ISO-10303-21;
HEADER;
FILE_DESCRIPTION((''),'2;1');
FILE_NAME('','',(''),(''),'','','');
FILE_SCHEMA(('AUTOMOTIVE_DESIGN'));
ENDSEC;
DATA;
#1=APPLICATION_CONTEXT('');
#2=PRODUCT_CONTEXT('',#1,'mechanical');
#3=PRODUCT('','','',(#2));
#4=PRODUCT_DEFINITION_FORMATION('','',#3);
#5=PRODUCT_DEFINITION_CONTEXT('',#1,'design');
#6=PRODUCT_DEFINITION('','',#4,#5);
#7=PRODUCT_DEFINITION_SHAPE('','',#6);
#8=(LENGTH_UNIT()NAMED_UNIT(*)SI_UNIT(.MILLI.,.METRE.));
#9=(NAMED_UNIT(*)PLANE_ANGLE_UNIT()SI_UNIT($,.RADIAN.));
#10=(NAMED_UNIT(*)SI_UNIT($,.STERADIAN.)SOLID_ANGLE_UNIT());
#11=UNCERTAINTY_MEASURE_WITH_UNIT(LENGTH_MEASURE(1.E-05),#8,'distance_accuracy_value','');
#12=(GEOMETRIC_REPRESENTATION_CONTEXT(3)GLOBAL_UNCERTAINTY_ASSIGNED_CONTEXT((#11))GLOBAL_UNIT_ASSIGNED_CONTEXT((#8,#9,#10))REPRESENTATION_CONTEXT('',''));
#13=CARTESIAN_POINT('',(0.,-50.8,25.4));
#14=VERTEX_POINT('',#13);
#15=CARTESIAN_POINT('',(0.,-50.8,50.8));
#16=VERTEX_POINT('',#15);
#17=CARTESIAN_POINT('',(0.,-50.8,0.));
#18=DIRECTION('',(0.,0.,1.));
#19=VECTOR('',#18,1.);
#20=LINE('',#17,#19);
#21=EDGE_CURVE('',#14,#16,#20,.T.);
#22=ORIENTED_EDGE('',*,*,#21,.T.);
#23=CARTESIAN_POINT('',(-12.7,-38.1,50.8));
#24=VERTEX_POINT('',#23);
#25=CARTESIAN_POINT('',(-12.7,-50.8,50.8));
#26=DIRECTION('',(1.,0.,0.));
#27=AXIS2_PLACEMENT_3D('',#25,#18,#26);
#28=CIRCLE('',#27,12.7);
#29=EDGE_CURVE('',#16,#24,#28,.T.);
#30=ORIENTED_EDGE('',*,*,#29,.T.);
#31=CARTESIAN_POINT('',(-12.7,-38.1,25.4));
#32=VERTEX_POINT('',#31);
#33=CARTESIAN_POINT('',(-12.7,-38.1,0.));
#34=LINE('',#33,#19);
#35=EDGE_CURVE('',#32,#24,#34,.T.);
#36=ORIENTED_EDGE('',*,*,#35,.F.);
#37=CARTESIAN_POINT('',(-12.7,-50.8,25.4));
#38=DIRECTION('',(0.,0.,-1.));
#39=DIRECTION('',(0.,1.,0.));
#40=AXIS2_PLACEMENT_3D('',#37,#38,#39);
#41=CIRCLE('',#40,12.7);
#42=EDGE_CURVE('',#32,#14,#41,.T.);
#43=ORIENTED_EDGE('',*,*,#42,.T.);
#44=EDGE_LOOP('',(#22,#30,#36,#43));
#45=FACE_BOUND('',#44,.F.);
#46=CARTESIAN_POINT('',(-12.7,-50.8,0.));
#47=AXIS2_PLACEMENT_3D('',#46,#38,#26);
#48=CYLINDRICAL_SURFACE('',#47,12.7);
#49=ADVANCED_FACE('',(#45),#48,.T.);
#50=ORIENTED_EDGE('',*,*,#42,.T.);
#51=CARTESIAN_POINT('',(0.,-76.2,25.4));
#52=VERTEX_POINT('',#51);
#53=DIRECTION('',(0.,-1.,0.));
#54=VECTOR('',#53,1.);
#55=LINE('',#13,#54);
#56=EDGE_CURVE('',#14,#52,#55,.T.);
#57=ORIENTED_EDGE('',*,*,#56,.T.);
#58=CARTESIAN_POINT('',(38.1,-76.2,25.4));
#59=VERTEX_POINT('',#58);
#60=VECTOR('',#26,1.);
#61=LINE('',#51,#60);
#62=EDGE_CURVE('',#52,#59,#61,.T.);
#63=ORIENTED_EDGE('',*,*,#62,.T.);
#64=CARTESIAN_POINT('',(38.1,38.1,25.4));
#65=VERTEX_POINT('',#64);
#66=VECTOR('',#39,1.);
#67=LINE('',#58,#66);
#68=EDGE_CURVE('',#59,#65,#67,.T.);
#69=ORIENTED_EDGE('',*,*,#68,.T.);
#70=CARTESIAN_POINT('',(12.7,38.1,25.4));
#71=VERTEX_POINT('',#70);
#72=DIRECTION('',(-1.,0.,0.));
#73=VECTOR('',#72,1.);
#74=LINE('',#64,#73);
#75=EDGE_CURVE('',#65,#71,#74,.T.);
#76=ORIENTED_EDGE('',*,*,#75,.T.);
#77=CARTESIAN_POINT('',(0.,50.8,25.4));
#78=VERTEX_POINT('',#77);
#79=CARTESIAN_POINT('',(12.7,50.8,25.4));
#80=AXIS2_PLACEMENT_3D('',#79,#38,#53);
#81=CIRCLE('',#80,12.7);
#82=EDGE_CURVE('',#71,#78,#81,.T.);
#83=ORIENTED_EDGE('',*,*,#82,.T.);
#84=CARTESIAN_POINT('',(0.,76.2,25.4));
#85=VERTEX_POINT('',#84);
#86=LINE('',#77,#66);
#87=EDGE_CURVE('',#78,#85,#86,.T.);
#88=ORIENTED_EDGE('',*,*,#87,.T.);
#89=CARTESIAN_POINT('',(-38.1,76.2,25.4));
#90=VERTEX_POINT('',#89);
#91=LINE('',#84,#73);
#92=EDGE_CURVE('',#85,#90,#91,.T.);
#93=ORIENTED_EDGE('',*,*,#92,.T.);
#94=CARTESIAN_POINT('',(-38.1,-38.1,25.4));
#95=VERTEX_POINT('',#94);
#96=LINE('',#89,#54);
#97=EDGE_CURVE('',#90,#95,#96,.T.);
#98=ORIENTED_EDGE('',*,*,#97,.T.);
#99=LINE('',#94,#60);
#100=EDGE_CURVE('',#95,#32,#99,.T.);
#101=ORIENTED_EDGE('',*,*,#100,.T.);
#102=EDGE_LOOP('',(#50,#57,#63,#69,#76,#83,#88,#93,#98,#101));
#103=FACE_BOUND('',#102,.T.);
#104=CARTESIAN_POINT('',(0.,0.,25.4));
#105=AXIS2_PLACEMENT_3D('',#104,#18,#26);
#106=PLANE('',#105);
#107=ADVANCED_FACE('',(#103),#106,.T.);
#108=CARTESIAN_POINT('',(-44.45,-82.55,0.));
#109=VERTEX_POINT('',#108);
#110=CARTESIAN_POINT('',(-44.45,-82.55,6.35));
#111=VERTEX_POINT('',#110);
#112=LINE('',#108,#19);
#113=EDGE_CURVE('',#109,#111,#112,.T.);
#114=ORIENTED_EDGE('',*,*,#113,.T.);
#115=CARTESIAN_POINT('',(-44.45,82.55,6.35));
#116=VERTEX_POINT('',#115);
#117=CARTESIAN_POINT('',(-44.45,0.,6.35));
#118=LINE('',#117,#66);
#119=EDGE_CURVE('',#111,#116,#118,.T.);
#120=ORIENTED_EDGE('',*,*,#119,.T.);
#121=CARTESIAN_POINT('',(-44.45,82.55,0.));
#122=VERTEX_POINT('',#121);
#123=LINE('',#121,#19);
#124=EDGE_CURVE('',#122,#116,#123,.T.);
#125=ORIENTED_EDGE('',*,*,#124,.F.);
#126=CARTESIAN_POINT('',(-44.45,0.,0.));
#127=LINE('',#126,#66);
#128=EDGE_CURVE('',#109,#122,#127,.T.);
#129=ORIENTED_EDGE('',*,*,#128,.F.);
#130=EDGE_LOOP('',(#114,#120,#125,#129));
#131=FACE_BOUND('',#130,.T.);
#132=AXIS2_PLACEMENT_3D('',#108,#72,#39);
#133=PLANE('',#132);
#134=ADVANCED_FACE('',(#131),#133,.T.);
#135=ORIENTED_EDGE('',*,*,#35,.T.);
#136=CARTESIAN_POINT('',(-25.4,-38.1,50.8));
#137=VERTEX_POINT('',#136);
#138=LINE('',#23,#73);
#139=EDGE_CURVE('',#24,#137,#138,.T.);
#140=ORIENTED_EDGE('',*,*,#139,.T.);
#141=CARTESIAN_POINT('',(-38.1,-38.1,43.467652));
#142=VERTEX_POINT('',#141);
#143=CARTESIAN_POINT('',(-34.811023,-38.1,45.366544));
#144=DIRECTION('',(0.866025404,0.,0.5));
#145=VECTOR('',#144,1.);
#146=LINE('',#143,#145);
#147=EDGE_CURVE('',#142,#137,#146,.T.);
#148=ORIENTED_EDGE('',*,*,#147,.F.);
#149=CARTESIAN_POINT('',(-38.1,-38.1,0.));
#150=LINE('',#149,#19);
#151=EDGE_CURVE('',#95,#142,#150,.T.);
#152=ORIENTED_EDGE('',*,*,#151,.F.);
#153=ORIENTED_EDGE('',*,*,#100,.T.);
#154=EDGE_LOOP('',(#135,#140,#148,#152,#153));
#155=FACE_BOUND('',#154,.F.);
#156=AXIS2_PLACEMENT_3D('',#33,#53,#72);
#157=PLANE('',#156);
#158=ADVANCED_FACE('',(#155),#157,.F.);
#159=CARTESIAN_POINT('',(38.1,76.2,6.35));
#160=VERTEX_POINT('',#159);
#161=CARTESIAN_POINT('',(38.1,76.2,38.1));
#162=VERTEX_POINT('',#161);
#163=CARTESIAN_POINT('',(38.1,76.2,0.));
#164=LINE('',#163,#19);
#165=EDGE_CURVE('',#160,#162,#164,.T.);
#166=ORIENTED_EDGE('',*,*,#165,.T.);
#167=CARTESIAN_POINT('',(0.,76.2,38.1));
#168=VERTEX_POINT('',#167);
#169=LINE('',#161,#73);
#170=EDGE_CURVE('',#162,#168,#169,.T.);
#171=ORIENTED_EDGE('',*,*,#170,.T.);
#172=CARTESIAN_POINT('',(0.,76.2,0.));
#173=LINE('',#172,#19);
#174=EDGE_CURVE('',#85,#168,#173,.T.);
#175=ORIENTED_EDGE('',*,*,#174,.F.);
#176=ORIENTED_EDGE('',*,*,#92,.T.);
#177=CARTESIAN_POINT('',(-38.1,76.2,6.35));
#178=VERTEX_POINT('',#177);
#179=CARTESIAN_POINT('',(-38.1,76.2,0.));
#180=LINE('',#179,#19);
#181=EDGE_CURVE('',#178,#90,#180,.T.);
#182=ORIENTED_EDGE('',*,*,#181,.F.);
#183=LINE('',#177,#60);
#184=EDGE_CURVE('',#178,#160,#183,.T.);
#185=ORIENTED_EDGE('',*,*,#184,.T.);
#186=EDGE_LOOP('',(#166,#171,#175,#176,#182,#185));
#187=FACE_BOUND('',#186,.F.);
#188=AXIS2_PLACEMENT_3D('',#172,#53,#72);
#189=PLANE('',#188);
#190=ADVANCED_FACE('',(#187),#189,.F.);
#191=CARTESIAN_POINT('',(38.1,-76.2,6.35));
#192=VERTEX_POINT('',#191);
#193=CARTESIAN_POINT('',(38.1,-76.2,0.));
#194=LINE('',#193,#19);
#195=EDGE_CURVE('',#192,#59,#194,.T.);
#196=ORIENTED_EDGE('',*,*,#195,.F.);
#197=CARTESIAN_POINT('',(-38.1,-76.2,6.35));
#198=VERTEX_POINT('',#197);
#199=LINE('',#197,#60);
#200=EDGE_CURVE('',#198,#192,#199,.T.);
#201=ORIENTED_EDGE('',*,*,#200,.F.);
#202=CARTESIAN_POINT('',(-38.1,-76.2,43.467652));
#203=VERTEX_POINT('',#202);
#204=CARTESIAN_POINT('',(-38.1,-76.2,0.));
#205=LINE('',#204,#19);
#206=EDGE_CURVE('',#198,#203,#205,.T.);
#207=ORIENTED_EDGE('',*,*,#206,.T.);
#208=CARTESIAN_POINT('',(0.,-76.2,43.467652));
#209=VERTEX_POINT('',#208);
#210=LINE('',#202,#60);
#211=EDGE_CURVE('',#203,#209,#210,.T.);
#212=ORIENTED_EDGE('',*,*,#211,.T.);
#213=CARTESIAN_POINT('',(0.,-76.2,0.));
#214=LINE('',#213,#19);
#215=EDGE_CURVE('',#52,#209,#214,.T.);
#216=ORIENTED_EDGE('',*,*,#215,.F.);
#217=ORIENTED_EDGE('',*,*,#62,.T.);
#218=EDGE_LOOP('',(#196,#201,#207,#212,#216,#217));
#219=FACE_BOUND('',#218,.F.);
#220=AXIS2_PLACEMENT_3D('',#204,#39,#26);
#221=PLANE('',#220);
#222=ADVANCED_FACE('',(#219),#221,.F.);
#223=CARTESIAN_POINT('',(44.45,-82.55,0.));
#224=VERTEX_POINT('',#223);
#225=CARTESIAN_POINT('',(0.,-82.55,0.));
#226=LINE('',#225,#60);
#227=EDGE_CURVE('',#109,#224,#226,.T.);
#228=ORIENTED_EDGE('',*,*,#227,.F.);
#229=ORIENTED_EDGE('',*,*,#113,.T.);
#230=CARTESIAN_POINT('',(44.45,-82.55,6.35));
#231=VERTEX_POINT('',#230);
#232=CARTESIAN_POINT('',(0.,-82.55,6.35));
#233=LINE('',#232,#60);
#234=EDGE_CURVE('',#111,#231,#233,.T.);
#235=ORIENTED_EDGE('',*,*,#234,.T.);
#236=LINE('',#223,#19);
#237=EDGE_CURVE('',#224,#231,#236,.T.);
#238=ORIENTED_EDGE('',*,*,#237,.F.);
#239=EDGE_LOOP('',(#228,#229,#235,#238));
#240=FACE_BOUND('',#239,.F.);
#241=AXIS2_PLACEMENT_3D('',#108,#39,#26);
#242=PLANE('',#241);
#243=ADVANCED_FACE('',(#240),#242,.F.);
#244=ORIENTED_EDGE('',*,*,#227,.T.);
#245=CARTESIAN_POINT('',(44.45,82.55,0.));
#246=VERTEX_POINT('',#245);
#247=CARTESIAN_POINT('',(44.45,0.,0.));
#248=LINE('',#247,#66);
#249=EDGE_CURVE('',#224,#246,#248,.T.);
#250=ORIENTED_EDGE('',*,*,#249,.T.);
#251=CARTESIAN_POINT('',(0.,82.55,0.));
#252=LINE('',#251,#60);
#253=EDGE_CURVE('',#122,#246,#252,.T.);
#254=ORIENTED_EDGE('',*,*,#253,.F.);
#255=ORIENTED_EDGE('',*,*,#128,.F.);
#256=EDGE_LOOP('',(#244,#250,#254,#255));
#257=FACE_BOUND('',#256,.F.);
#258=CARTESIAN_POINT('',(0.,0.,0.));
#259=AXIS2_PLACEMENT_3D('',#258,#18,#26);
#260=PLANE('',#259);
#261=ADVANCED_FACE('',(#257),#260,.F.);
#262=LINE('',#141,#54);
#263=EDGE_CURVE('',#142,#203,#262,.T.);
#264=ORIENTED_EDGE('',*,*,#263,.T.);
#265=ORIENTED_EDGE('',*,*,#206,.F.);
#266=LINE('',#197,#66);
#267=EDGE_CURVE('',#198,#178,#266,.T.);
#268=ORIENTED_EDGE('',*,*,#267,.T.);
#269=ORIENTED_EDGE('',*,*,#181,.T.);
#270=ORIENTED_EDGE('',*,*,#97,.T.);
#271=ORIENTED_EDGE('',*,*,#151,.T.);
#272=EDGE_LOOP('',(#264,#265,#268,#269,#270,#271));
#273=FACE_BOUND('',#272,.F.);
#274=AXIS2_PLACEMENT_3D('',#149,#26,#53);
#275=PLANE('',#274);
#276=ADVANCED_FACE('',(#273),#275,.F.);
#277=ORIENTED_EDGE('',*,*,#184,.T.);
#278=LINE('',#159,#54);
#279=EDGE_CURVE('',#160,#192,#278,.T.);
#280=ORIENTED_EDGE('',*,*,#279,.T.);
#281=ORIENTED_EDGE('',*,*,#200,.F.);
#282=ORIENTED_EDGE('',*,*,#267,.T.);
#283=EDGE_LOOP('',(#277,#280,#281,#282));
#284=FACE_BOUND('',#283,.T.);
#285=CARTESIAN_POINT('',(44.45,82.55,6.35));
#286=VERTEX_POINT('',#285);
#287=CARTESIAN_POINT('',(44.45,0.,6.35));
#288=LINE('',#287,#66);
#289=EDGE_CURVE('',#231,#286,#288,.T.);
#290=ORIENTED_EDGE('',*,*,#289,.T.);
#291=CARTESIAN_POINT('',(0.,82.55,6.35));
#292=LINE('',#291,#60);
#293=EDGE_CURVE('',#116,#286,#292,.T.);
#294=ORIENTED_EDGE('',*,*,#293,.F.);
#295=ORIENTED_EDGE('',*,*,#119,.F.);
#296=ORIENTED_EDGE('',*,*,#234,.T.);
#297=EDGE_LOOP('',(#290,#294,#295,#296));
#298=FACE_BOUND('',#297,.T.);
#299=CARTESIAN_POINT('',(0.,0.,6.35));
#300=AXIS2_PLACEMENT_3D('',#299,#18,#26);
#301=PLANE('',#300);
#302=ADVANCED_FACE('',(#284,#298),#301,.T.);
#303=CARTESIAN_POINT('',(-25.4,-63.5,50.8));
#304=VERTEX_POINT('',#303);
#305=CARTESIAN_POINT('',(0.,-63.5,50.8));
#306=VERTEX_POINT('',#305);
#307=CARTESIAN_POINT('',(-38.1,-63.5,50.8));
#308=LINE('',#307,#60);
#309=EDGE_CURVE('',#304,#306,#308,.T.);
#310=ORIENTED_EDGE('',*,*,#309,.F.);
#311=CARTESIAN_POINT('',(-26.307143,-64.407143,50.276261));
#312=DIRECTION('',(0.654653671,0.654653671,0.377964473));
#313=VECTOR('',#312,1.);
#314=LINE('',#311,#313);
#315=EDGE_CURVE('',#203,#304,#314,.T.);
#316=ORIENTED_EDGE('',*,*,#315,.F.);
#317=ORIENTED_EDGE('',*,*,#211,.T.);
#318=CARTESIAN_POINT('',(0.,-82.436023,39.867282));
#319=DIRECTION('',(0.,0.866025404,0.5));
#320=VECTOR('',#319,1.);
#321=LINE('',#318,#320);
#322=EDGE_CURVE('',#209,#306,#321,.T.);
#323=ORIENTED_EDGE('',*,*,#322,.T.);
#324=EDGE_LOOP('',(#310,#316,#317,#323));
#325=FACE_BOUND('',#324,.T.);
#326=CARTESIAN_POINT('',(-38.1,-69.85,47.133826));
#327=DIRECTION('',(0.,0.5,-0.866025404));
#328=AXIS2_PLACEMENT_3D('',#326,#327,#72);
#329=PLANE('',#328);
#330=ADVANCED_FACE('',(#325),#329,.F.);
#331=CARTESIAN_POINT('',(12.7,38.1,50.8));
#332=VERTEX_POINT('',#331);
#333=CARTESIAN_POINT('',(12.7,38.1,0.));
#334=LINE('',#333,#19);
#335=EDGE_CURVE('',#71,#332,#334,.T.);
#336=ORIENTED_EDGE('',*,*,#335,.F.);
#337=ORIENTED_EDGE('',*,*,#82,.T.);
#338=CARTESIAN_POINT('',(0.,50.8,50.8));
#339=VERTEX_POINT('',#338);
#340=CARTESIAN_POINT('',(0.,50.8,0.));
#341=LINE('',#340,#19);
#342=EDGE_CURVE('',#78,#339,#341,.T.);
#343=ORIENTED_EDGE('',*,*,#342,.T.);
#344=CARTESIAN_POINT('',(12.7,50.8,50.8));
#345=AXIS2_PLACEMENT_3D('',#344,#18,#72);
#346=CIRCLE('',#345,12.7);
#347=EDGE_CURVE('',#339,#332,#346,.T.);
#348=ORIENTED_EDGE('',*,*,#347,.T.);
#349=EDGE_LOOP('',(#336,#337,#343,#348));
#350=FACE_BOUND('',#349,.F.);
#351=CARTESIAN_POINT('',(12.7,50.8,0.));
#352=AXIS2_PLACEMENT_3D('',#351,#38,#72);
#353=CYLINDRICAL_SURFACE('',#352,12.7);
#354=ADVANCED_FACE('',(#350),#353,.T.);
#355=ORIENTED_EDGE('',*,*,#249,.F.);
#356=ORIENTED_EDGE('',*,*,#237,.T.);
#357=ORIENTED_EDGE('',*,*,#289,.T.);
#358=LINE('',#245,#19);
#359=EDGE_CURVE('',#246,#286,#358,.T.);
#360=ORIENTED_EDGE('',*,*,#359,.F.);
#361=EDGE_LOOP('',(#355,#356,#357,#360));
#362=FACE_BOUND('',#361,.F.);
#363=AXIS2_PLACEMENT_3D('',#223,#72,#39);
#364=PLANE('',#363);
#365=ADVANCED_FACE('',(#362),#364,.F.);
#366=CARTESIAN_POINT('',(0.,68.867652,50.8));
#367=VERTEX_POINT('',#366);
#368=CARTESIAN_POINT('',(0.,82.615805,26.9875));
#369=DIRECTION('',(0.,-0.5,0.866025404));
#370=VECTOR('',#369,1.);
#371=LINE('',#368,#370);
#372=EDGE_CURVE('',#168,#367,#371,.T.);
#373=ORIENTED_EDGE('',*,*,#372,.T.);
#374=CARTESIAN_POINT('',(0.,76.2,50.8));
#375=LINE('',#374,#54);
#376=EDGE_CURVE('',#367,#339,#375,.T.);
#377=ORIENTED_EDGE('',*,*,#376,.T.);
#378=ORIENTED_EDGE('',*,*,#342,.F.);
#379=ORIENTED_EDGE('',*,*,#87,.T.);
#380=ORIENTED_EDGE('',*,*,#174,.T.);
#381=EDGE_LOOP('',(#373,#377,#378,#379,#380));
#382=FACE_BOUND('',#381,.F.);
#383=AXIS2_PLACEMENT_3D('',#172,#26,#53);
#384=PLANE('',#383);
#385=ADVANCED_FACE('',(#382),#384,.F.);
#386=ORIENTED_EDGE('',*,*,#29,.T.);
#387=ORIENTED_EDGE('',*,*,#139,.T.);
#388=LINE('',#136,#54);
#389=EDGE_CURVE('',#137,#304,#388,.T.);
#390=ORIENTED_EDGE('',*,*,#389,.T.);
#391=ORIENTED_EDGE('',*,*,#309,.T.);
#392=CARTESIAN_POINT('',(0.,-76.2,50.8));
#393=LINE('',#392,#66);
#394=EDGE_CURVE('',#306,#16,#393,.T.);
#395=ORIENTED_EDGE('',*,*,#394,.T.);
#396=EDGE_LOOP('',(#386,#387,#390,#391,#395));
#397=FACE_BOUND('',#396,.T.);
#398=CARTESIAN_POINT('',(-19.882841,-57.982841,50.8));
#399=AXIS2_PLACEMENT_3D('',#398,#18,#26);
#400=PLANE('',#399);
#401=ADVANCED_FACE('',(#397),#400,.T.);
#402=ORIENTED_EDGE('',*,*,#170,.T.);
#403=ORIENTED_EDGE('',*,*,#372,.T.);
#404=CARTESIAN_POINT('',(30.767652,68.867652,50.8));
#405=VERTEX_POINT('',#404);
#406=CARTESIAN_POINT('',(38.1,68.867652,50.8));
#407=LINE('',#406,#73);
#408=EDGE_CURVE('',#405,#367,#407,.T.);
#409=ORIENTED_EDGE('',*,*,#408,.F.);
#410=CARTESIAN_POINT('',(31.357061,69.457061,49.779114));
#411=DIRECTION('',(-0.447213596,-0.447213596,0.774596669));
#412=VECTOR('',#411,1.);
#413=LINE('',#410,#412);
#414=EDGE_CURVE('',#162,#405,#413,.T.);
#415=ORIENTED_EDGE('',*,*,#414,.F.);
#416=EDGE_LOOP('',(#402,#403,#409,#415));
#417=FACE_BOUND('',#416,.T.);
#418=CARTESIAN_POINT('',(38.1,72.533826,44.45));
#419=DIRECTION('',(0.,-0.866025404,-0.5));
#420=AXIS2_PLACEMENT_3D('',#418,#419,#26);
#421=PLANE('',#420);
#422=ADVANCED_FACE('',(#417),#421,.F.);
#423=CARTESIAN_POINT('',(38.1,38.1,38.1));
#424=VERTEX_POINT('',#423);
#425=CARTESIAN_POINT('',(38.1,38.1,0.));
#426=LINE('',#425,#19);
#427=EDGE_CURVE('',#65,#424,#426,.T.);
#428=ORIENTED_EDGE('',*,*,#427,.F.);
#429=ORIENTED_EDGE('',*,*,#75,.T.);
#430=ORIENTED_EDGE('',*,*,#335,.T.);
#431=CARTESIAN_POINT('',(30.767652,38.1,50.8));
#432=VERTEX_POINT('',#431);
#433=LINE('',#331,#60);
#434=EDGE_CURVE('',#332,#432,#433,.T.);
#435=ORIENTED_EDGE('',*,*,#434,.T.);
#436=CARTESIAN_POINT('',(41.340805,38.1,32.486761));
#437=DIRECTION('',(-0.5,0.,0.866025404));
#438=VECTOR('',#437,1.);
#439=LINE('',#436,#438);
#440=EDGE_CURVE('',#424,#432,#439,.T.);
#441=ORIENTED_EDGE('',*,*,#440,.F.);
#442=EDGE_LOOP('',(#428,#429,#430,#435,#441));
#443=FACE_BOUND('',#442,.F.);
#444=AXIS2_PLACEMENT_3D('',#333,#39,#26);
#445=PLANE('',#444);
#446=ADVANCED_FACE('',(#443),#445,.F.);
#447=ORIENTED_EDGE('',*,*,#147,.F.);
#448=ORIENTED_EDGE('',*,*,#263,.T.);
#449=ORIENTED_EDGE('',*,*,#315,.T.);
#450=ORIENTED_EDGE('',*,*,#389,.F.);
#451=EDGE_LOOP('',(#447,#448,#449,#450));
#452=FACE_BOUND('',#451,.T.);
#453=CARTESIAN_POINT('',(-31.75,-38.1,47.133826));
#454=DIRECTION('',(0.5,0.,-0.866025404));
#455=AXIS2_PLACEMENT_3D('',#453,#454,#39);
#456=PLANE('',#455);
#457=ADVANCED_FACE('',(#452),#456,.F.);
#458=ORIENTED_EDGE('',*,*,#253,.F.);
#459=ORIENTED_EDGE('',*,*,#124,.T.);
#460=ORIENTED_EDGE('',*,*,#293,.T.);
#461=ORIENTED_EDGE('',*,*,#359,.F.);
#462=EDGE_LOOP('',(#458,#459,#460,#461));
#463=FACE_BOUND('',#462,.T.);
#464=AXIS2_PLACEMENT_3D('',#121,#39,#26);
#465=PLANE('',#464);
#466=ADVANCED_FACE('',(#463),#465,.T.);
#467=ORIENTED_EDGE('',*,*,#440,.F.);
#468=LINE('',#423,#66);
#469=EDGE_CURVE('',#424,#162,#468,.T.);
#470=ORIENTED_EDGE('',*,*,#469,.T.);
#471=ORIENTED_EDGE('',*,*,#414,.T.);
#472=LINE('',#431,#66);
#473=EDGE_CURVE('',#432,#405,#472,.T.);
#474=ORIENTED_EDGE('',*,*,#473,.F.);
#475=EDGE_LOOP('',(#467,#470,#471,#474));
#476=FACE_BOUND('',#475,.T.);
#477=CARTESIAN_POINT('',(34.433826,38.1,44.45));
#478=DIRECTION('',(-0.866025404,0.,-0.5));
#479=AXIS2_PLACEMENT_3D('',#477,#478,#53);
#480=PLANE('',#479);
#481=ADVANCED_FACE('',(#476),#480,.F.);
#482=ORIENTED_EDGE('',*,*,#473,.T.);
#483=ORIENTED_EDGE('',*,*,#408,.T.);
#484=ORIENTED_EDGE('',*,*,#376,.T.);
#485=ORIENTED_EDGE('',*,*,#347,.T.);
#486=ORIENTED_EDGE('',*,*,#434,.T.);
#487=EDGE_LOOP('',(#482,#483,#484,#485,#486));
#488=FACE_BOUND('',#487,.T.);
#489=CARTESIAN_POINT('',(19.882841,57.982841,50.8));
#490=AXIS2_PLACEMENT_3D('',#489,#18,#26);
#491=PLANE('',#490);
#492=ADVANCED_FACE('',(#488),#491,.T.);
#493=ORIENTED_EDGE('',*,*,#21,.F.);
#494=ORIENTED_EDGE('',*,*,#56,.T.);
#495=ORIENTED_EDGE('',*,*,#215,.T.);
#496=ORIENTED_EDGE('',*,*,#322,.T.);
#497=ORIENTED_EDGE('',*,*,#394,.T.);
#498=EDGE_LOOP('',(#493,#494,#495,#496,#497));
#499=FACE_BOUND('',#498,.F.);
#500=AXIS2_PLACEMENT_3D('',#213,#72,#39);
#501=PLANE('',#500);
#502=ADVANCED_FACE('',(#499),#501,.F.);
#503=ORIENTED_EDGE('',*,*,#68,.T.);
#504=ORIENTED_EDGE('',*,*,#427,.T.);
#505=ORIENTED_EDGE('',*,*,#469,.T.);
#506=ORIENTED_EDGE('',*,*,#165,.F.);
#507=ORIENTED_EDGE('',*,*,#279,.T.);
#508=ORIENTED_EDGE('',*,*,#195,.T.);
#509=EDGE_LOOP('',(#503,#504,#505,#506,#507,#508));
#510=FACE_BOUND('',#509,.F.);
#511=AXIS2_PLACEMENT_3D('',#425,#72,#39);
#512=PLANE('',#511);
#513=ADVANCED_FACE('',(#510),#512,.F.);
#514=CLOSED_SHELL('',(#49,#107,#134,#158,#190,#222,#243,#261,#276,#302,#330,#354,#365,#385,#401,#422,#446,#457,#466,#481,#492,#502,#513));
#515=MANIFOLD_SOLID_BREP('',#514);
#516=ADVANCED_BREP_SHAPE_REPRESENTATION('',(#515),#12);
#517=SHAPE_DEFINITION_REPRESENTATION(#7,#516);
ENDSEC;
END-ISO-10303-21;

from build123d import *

# Parameters (mm, degrees)
F0_W        = 88.9
F0_H        = 165.1
F1_DEPTH    = 6.35
F2_DEPTH    = 25.4
F3_DEPTH    = 50.8
F4_C1_SIZE2 = 7.3323484187
F4_C1_SIZE  = 12.7
F4_C2_SIZE2 = 12.7
F4_C2_SIZE  = 7.3323484187
F4_C3_SIZE2 = 12.7
F4_C3_SIZE  = 7.3323484187
F4_C4_SIZE2 = 7.3323484187
F4_C4_SIZE  = 12.7


with BuildPart() as f1:
    # F0 (on Top) → F1 (new body)
    with BuildSketch(Plane.XY):
        Rectangle(F0_W, F0_H)
        Polygon((38.1, 38.1), (38.1, -76.2), (0, -76.2), (-38.1, -76.2), (-38.1, -38.1), (-38.1, 76.2), (0, 76.2), (38.1, 76.2), align=None, mode=Mode.SUBTRACT)
    extrude(amount=F1_DEPTH)

    # F0 (on Top) → F2 (join)
    with BuildSketch(Plane.XY):
        with BuildLine():
            Line((0, -76.2), (38.1, -76.2))
            Line((38.1, -76.2), (38.1, 38.1))
            Line((38.1, 38.1), (12.7, 38.1))
            ThreePointArc((12.7, 38.1), (3.7197438789, 41.8197438789), (0, 50.8))
            Line((0, 50.8), (0, 76.2))
            Line((0, 76.2), (-38.1, 76.2))
            Line((-38.1, 76.2), (-38.1, -38.1))
            Line((-38.1, -38.1), (-12.7, -38.1))
            ThreePointArc((-12.7, -38.1), (-3.7197438789, -41.8197438789), (0, -50.8))
            Line((0, -50.8), (0, -76.2))
        make_face()
    extrude(amount=F2_DEPTH)

    # F0 (on Top) → F3 (join)
    with BuildSketch(Plane.XY):
        with BuildLine():
            Line((-38.1, -76.2), (0, -76.2))
            Line((0, -76.2), (0, -50.8))
            ThreePointArc((0, -50.8), (-3.7197438789, -41.8197438789), (-12.7, -38.1))
            Line((-12.7, -38.1), (-38.1, -38.1))
            Line((-38.1, -38.1), (-38.1, -76.2))
        make_face()
        with BuildLine():
            Line((12.7, 38.1), (38.1, 38.1))
            Line((38.1, 38.1), (38.1, 76.2))
            Line((38.1, 76.2), (0, 76.2))
            Line((0, 76.2), (0, 50.8))
            ThreePointArc((0, 50.8), (3.7197438789, 41.8197438789), (12.7, 38.1))
        make_face()
    extrude(amount=F3_DEPTH)

    # F4: chamfer of 12.7 x 7.3323484187 on 4 edges, made by hand

    # F4_c1
    f4_c1_edges = [f1.edges().sort_by_distance(p)[0] for p in [
        (19.05, 76.2, 50.8),
    ]]
    f4_c1_side = f1.faces().sort_by_distance((19.05, 76.2, 50.6533530316))[0]
    chamfer(f4_c1_edges, length=F4_C1_SIZE, length2=F4_C1_SIZE2, reference=f4_c1_side)

    # F4_c2
    f4_c2_edges = [f1.edges().sort_by_distance(p)[0] for p in [
        (-19.05, -76.2, 50.8),
    ]]
    f4_c2_side = f1.faces().sort_by_distance((-19.05, -76.2, 50.6533530316))[0]
    chamfer(f4_c2_edges, length=F4_C2_SIZE, length2=F4_C2_SIZE2, reference=f4_c2_side)

    # F4_c3
    f4_c3_edges = [f1.edges().sort_by_distance(p)[0] for p in [
        (-38.1, -50.8, 50.8),
    ]]
    f4_c3_side = f1.faces().sort_by_distance((-38.1, -50.8, 50.6533530316))[0]
    chamfer(f4_c3_edges, length=F4_C3_SIZE, length2=F4_C3_SIZE2, reference=f4_c3_side)

    # F4_c4
    f4_c4_edges = [f1.edges().sort_by_distance(p)[0] for p in [
        (38.1, 53.4838257906, 50.8),
    ]]
    f4_c4_side = f1.faces().sort_by_distance((38.1, 53.4838257906, 50.6533530316))[0]
    chamfer(f4_c4_edges, length=F4_C4_SIZE, length2=F4_C4_SIZE2, reference=f4_c4_side)


solid = f1.part
